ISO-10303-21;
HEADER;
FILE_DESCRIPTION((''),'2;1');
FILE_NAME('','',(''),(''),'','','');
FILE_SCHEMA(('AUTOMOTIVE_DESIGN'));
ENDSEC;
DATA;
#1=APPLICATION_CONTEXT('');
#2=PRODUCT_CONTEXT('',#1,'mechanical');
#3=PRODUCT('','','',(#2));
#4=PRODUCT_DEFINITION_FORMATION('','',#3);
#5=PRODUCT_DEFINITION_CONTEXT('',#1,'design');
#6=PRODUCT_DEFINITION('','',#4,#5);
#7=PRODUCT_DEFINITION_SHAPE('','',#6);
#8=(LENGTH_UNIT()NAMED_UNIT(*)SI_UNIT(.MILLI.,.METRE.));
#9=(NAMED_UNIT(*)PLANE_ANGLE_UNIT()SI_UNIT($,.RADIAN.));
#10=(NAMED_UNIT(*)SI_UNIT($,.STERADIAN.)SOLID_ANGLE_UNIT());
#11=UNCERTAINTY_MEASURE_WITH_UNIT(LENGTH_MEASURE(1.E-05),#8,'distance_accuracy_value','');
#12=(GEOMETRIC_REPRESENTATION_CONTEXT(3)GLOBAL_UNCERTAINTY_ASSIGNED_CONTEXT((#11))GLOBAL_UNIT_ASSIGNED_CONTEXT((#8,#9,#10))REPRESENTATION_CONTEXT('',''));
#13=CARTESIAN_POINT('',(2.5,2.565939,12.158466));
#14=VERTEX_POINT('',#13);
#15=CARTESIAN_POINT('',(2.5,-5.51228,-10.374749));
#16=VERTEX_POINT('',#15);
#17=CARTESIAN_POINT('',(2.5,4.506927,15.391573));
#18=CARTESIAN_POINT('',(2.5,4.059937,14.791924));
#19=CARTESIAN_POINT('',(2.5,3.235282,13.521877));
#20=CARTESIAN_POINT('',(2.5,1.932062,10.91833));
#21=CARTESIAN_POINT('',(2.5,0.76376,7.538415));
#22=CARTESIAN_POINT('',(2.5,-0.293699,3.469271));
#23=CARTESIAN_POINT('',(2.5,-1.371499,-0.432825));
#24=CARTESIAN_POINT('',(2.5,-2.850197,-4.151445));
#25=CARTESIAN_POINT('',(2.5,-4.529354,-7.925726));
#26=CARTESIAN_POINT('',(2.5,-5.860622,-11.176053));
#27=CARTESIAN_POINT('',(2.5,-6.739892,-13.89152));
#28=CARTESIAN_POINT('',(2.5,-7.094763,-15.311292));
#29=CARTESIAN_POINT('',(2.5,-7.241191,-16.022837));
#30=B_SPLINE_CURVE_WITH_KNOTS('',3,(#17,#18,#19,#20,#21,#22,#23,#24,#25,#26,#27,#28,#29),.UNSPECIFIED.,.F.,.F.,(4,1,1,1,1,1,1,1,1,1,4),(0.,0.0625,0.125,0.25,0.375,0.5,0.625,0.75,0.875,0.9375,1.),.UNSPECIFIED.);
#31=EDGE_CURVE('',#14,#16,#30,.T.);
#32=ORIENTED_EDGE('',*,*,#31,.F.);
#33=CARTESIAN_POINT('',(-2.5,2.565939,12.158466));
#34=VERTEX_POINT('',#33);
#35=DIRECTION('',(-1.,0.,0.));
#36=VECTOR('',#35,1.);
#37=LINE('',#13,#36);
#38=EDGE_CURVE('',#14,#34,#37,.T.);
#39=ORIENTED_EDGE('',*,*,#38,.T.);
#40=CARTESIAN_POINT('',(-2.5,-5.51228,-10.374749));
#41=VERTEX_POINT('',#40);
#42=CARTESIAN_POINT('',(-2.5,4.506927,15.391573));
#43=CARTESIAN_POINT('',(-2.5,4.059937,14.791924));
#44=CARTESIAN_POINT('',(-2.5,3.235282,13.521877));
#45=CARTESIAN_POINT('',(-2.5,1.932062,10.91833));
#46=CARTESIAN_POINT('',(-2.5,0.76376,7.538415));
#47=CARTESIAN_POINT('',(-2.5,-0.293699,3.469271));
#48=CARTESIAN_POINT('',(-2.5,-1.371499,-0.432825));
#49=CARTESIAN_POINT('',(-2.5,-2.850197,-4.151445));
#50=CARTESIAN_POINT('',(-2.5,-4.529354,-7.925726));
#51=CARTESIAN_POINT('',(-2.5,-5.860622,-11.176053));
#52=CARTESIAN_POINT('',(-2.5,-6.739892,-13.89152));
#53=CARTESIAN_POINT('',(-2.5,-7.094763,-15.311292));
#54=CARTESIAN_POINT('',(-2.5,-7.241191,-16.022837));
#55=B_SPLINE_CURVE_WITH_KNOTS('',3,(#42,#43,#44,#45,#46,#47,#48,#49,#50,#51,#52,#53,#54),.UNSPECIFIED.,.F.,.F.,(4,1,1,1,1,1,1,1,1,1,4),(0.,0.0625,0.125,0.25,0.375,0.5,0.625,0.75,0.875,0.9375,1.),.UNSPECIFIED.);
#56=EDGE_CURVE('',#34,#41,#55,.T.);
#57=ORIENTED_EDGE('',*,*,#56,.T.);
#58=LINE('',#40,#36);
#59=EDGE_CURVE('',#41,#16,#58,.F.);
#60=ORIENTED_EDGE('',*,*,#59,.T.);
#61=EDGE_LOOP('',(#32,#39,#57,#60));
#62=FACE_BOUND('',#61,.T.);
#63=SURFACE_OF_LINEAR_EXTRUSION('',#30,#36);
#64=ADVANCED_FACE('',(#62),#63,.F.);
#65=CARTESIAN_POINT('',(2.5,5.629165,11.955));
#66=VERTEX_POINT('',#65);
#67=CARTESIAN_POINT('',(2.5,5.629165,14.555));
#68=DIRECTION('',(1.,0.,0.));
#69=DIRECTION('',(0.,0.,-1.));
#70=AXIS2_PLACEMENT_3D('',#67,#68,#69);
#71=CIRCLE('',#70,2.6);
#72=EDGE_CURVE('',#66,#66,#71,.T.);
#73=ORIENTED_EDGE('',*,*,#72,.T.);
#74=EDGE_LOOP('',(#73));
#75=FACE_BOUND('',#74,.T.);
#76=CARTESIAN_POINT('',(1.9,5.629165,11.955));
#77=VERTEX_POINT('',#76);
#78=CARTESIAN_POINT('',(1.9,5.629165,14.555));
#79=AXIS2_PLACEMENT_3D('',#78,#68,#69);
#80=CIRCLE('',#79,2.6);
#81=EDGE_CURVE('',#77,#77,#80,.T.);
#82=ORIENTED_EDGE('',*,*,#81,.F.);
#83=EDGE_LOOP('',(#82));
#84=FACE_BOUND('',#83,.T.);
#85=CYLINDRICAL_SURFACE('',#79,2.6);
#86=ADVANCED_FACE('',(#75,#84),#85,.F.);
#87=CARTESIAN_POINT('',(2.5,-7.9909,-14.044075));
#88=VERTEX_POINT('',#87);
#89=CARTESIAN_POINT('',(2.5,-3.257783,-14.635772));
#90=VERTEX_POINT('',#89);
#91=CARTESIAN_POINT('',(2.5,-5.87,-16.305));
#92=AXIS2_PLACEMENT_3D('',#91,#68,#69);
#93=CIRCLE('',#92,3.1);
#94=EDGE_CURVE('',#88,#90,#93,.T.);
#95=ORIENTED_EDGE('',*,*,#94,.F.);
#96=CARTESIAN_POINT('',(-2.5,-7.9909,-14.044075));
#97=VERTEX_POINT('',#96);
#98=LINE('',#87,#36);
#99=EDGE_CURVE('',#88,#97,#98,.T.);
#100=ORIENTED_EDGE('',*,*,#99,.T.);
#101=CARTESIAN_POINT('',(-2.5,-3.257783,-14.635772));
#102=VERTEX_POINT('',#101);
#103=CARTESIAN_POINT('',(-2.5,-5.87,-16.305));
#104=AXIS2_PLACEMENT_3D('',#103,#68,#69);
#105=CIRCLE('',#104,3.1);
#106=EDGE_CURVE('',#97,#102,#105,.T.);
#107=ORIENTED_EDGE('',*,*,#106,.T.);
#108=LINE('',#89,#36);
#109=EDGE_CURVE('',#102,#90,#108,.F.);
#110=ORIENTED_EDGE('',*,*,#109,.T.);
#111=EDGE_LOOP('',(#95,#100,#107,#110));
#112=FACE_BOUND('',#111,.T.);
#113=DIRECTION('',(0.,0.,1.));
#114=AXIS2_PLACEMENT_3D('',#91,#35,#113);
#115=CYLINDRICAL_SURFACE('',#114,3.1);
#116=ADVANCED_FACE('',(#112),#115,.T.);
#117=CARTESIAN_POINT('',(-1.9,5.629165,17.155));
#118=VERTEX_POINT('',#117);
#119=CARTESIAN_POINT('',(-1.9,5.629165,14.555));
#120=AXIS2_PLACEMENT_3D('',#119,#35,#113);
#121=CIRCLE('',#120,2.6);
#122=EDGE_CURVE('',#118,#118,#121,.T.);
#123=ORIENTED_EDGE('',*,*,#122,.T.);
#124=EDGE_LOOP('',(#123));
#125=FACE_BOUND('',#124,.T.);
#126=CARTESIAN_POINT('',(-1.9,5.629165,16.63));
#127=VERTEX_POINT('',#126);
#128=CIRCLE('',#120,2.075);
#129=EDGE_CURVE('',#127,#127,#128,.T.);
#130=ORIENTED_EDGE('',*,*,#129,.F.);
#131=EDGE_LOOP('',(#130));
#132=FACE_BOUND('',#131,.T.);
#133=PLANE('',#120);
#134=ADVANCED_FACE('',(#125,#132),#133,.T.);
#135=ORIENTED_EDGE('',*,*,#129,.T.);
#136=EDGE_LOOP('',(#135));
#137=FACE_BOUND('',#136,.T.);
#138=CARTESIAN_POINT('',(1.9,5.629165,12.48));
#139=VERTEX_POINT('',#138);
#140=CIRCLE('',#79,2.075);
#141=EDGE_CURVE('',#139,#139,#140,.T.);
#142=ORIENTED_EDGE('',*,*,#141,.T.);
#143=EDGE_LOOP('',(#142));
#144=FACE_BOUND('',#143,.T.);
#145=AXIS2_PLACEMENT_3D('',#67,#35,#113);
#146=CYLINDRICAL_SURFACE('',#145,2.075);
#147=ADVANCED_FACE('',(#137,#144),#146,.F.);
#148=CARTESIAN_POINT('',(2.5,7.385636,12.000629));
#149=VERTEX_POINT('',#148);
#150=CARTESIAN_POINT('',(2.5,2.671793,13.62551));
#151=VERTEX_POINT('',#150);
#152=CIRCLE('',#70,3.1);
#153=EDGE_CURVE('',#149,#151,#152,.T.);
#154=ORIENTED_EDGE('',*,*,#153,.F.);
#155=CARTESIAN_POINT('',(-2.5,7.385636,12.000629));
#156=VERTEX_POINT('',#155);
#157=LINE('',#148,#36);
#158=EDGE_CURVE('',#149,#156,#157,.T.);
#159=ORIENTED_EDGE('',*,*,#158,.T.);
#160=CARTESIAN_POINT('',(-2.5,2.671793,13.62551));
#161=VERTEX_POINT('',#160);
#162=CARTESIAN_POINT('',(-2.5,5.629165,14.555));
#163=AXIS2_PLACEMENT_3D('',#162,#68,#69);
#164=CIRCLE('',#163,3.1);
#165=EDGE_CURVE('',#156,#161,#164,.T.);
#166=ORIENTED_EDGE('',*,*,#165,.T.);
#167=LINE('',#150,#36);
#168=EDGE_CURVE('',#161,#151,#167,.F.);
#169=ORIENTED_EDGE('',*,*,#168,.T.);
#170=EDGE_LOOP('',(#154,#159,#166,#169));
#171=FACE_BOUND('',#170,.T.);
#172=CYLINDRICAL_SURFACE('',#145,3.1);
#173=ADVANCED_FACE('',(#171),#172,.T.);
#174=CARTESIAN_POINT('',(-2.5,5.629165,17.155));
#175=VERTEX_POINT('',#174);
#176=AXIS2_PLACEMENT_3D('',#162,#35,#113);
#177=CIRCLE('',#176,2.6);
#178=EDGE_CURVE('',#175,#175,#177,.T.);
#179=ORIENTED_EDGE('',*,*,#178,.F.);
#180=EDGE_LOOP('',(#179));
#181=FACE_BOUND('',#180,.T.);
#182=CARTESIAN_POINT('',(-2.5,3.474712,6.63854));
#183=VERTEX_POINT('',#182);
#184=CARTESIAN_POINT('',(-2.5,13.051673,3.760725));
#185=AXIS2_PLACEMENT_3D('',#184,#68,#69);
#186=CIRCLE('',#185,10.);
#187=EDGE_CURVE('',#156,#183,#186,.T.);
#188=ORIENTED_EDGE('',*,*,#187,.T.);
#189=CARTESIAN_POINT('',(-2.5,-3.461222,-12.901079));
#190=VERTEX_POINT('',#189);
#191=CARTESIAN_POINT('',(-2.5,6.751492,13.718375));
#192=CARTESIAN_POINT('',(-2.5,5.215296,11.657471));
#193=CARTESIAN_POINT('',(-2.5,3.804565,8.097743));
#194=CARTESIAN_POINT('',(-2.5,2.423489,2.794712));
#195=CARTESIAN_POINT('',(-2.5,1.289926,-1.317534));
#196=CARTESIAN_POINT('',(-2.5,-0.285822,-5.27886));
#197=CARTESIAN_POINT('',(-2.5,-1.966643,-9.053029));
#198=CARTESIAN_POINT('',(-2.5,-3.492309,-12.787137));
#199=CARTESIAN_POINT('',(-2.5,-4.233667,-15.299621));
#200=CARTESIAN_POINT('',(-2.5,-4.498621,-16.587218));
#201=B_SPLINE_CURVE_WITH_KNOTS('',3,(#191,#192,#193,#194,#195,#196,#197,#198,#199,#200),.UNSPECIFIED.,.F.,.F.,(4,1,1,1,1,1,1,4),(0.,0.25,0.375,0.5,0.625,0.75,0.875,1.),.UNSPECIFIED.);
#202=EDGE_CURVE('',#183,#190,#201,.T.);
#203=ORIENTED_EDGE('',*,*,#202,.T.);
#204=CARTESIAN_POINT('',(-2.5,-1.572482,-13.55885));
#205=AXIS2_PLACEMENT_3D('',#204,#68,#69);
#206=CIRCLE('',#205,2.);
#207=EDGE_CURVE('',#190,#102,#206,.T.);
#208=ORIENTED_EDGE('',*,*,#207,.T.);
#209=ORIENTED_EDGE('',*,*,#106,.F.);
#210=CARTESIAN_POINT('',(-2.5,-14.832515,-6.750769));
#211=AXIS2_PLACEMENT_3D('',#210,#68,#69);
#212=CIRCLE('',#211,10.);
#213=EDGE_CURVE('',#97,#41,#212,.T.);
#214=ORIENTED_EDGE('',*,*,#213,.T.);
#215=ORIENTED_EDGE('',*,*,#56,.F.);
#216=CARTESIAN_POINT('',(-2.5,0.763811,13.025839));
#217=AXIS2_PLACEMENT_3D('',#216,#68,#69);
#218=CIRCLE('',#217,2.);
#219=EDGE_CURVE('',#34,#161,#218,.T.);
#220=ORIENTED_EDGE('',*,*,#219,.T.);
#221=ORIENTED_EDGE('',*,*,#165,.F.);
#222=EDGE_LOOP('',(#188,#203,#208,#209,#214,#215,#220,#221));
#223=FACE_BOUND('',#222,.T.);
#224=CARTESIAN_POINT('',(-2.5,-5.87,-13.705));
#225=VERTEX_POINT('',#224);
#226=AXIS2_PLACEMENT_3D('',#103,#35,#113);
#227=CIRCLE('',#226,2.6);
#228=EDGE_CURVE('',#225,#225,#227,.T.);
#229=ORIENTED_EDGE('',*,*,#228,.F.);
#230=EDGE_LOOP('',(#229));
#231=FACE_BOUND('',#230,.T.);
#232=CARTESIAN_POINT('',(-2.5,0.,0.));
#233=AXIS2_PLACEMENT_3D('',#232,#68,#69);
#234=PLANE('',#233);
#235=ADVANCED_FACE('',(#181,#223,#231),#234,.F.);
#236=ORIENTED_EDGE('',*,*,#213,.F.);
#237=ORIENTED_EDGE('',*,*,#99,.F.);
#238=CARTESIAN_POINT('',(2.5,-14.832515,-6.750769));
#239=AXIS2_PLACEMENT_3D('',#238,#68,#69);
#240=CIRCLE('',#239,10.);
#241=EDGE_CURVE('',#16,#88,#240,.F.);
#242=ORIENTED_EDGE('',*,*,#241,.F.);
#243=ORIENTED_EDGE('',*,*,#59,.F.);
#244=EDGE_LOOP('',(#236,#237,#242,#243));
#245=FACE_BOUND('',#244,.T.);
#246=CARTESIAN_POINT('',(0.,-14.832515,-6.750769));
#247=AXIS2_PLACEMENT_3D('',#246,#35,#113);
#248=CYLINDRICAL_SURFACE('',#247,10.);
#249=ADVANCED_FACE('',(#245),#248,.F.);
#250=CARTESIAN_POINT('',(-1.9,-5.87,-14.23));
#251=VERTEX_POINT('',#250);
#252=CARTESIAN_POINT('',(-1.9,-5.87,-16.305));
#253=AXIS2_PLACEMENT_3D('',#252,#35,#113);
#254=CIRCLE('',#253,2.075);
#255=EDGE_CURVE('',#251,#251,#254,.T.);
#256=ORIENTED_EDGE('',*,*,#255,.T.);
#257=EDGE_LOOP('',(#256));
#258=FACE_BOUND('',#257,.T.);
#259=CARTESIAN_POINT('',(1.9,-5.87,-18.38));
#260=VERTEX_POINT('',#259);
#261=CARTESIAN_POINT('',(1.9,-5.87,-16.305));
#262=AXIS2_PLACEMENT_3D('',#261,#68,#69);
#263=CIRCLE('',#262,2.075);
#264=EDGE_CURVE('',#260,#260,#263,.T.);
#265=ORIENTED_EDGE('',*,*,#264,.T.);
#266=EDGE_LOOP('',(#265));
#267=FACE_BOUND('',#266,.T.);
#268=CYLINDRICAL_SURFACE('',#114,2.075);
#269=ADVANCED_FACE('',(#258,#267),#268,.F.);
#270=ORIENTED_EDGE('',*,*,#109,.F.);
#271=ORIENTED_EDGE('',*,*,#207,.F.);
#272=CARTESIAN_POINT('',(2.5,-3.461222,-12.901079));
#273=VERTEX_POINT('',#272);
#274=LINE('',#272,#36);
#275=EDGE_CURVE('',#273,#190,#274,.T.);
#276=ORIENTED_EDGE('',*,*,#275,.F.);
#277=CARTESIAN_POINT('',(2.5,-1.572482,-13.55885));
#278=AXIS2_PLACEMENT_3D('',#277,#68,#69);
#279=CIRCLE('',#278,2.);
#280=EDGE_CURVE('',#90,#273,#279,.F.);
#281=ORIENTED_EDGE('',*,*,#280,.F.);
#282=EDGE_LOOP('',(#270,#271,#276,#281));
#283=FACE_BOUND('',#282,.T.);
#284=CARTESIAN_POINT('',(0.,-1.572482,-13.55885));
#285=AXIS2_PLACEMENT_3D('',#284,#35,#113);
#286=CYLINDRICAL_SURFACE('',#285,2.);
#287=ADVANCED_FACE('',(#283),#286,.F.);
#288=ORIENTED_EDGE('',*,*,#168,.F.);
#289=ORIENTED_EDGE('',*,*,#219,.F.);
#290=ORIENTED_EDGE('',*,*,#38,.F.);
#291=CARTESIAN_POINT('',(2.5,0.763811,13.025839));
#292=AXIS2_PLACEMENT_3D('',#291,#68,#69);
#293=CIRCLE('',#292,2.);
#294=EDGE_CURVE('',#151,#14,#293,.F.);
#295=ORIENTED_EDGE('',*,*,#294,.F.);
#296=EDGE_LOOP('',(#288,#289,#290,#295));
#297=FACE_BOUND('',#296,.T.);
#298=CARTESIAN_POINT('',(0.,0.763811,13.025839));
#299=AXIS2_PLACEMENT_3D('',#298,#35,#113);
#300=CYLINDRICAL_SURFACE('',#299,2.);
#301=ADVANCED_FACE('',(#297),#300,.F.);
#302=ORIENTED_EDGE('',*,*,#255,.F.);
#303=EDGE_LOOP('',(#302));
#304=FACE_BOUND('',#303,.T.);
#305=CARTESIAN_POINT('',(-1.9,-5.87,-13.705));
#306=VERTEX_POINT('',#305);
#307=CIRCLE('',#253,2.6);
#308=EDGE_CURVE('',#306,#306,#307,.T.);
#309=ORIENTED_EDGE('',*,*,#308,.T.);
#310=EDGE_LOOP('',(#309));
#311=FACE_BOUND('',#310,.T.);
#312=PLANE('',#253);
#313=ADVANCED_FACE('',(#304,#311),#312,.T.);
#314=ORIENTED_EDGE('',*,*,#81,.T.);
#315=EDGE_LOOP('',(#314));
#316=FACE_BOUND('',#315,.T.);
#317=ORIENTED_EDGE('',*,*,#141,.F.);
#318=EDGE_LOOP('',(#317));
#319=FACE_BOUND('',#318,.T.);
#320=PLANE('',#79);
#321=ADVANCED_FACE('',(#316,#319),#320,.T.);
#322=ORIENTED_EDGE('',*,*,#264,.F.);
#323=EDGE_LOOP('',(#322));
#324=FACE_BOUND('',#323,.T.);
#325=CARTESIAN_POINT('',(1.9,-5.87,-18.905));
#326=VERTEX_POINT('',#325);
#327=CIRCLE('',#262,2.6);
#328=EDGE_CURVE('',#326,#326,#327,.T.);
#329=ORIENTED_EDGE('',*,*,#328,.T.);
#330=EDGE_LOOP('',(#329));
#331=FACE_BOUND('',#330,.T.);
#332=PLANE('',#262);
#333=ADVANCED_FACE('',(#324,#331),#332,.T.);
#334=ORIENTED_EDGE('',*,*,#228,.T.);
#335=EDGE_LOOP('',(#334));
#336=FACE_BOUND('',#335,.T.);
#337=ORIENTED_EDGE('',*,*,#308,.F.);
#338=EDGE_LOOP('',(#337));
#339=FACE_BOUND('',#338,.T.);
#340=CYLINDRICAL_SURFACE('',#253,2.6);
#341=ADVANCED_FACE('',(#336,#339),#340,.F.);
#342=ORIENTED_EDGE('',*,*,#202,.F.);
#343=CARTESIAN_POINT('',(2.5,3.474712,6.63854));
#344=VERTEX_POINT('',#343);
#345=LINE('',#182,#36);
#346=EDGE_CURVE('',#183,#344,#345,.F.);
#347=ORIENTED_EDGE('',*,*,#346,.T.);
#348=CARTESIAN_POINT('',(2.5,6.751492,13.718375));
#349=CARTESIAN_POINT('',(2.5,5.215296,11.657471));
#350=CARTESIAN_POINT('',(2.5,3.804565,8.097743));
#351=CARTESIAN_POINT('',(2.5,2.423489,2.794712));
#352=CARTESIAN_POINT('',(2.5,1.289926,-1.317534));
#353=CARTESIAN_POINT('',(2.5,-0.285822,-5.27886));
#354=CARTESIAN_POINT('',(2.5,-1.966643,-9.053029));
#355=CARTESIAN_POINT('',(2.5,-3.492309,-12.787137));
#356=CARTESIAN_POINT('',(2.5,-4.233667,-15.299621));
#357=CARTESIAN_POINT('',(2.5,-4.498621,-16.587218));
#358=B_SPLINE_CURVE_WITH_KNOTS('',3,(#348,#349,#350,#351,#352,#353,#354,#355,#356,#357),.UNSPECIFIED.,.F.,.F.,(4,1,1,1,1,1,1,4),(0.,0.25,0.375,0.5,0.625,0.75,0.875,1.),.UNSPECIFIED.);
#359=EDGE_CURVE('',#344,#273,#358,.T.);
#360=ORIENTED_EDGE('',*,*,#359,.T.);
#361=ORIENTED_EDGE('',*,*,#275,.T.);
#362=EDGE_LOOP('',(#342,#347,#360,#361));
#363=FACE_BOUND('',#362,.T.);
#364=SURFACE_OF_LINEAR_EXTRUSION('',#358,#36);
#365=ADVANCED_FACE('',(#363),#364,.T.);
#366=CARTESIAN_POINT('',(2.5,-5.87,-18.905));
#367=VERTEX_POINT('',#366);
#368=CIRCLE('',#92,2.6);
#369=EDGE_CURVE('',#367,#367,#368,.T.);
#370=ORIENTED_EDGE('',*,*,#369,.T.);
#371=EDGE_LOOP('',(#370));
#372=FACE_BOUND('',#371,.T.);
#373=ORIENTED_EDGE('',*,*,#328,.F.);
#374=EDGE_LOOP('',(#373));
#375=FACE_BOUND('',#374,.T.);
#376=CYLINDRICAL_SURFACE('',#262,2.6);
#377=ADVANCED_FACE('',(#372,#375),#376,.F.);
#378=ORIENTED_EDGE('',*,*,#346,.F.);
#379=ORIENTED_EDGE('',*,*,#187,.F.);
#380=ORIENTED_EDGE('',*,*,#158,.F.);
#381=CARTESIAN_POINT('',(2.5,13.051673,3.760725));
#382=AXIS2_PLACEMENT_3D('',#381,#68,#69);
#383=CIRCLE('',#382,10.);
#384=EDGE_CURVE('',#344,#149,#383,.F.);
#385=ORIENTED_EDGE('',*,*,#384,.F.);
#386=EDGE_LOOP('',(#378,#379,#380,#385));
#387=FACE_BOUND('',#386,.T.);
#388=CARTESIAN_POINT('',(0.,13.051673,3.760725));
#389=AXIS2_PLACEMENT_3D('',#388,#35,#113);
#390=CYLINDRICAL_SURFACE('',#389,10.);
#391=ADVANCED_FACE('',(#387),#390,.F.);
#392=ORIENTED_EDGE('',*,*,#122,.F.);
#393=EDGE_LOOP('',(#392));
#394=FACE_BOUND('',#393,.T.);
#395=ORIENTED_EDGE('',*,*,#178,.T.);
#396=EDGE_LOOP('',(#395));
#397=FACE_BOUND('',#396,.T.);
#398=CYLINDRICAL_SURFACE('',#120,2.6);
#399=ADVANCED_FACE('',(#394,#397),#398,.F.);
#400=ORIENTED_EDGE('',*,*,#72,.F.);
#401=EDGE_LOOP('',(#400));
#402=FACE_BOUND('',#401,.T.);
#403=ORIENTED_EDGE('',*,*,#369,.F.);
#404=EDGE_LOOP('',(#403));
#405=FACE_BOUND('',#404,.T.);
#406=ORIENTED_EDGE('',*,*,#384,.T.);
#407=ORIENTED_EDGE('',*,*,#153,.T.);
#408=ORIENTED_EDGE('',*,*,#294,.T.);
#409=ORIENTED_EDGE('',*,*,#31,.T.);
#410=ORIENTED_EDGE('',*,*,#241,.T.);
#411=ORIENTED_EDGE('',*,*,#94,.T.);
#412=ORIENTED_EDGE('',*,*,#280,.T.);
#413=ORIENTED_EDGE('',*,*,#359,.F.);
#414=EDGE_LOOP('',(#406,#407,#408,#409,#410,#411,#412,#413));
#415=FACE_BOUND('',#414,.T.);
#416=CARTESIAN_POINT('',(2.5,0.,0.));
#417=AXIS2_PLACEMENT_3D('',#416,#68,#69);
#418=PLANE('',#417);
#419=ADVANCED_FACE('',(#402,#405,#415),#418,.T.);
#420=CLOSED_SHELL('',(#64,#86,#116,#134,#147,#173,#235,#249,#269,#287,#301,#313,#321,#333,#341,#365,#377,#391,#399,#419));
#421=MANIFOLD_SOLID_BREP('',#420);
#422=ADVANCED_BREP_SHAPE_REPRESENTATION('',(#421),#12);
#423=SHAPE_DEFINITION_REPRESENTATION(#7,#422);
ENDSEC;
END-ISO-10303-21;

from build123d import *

# Parameters (mm, degrees)
BOSS_EXTRUDE1_START     = -2.5
BOSS_EXTRUDE1_OUTLINE_R = 2.075
BOSS_EXTRUDE1_DEPTH     = 5
FILLET1_R               = 10
FILLET2_R               = 2
SKETCH6_R               = 2.6
CUT_EXTRUDE3_DEPTH      = 0.6
CUT_EXTRUDE4_START      = -0.6
SKETCH7_R               = 2.6
CUT_EXTRUDE4_DEPTH      = 0.6


# Read off the part's stored shape, not the designer's step: Boss-Extrude1
with BuildPart() as part:
    # Boss-Extrude1 outline → Boss-Extrude1 (new body)
    with BuildSketch(Plane(origin=(0, 0, 0), x_dir=(0, 0, -1), z_dir=(1, 0, 0)).offset(BOSS_EXTRUDE1_START)):
        with BuildLine():
            add(Edge.make_bspline(
                [(-11.467537503, 5.350641642), (-9.989640807, 4.583198508), (-7.178473446, 3.56515844), (-2.794711607, 2.423489001), (1.31753402, 1.289926051), (5.278860449, -0.285822235), (9.053028754, -1.966642772), (11.935810136, -3.144477132), (13.583881592, -3.694358455), (13.981041238, -3.818362685)],
                knots=[0.086674, 0.086674, 0.086674, 0.086674, 0.25, 0.375, 0.5, 0.625, 0.75, 0.875, 0.914505017, 0.914505017, 0.914505017, 0.914505017], degree=3))
            ThreePointArc((-11.467537503, 5.350641642), (-17.181514848, 7.27580405), (-12.959070193, 2.971533086))
            add(Edge.make_bspline(
                [(-12.959070193, 2.971533086), (-12.497149124, 2.725216721), (-10.724559711, 1.865083664), (-7.538415314, 0.763759759), (-3.469271241, -0.293699416), (0.432825124, -1.371499483), (4.151444935, -2.850197037), (7.925726422, -4.529354156), (10.977952232, -5.779484012), (12.799789723, -6.384662727), (13.276371809, -6.531370761)],
                knots=[0.080415635, 0.080415635, 0.080415635, 0.080415635, 0.125, 0.25, 0.375, 0.5, 0.625, 0.75, 0.875, 0.9184538, 0.9184538, 0.9184538, 0.9184538], degree=3))
            ThreePointArc((13.276371809, -6.531370761), (19.30544163, -6.649326649), (13.981041238, -3.818362685))
        make_face()
        with Locations((16.305, -5.87)):
            Circle(BOSS_EXTRUDE1_OUTLINE_R, mode=Mode.SUBTRACT)
        with Locations((-14.555, 5.629165125)):
            Circle(BOSS_EXTRUDE1_OUTLINE_R, mode=Mode.SUBTRACT)
    extrude(amount=BOSS_EXTRUDE1_DEPTH)

    # Fillet1
    fillet1_edges = [part.edges().sort_by_distance(p)[0] for p in [
        (0, -6.531370761, -13.276371809),
        (0, 5.350641642, 11.467537503),
    ]]
    fillet(fillet1_edges, radius=FILLET1_R)

    # Fillet2
    fillet2_edges = [part.edges().sort_by_distance(p)[0] for p in [
        (0, -3.818362685, -13.981041238),
        (0, 2.971533086, 12.959070193),
    ]]
    fillet(fillet2_edges, radius=FILLET2_R)

    # Sketch6 → Cut-Extrude3 (cut)
    with BuildSketch(Plane(origin=(2.5, 0, 0), x_dir=(0, 0, -1), z_dir=(1, 0, 0))):
        with Locations((-14.555, 5.629165125)):
            Circle(SKETCH6_R)
        with Locations((16.305, -5.87)):
            Circle(SKETCH6_R)
    extrude(amount=-CUT_EXTRUDE3_DEPTH, mode=Mode.SUBTRACT)

    # Sketch7 → Cut-Extrude4 (cut)
    with BuildSketch(Plane.ZY.offset(2.5).offset(CUT_EXTRUDE4_START)):
        with Locations(Location((14.555, 5.629165125, 0), (0, 0, 180))):
            Circle(SKETCH7_R)
        with Locations(Location((-16.305, -5.87, 0), (0, 0, 180))):
            Circle(SKETCH7_R)
    extrude(amount=CUT_EXTRUDE4_DEPTH, mode=Mode.SUBTRACT)


solid = part.part
